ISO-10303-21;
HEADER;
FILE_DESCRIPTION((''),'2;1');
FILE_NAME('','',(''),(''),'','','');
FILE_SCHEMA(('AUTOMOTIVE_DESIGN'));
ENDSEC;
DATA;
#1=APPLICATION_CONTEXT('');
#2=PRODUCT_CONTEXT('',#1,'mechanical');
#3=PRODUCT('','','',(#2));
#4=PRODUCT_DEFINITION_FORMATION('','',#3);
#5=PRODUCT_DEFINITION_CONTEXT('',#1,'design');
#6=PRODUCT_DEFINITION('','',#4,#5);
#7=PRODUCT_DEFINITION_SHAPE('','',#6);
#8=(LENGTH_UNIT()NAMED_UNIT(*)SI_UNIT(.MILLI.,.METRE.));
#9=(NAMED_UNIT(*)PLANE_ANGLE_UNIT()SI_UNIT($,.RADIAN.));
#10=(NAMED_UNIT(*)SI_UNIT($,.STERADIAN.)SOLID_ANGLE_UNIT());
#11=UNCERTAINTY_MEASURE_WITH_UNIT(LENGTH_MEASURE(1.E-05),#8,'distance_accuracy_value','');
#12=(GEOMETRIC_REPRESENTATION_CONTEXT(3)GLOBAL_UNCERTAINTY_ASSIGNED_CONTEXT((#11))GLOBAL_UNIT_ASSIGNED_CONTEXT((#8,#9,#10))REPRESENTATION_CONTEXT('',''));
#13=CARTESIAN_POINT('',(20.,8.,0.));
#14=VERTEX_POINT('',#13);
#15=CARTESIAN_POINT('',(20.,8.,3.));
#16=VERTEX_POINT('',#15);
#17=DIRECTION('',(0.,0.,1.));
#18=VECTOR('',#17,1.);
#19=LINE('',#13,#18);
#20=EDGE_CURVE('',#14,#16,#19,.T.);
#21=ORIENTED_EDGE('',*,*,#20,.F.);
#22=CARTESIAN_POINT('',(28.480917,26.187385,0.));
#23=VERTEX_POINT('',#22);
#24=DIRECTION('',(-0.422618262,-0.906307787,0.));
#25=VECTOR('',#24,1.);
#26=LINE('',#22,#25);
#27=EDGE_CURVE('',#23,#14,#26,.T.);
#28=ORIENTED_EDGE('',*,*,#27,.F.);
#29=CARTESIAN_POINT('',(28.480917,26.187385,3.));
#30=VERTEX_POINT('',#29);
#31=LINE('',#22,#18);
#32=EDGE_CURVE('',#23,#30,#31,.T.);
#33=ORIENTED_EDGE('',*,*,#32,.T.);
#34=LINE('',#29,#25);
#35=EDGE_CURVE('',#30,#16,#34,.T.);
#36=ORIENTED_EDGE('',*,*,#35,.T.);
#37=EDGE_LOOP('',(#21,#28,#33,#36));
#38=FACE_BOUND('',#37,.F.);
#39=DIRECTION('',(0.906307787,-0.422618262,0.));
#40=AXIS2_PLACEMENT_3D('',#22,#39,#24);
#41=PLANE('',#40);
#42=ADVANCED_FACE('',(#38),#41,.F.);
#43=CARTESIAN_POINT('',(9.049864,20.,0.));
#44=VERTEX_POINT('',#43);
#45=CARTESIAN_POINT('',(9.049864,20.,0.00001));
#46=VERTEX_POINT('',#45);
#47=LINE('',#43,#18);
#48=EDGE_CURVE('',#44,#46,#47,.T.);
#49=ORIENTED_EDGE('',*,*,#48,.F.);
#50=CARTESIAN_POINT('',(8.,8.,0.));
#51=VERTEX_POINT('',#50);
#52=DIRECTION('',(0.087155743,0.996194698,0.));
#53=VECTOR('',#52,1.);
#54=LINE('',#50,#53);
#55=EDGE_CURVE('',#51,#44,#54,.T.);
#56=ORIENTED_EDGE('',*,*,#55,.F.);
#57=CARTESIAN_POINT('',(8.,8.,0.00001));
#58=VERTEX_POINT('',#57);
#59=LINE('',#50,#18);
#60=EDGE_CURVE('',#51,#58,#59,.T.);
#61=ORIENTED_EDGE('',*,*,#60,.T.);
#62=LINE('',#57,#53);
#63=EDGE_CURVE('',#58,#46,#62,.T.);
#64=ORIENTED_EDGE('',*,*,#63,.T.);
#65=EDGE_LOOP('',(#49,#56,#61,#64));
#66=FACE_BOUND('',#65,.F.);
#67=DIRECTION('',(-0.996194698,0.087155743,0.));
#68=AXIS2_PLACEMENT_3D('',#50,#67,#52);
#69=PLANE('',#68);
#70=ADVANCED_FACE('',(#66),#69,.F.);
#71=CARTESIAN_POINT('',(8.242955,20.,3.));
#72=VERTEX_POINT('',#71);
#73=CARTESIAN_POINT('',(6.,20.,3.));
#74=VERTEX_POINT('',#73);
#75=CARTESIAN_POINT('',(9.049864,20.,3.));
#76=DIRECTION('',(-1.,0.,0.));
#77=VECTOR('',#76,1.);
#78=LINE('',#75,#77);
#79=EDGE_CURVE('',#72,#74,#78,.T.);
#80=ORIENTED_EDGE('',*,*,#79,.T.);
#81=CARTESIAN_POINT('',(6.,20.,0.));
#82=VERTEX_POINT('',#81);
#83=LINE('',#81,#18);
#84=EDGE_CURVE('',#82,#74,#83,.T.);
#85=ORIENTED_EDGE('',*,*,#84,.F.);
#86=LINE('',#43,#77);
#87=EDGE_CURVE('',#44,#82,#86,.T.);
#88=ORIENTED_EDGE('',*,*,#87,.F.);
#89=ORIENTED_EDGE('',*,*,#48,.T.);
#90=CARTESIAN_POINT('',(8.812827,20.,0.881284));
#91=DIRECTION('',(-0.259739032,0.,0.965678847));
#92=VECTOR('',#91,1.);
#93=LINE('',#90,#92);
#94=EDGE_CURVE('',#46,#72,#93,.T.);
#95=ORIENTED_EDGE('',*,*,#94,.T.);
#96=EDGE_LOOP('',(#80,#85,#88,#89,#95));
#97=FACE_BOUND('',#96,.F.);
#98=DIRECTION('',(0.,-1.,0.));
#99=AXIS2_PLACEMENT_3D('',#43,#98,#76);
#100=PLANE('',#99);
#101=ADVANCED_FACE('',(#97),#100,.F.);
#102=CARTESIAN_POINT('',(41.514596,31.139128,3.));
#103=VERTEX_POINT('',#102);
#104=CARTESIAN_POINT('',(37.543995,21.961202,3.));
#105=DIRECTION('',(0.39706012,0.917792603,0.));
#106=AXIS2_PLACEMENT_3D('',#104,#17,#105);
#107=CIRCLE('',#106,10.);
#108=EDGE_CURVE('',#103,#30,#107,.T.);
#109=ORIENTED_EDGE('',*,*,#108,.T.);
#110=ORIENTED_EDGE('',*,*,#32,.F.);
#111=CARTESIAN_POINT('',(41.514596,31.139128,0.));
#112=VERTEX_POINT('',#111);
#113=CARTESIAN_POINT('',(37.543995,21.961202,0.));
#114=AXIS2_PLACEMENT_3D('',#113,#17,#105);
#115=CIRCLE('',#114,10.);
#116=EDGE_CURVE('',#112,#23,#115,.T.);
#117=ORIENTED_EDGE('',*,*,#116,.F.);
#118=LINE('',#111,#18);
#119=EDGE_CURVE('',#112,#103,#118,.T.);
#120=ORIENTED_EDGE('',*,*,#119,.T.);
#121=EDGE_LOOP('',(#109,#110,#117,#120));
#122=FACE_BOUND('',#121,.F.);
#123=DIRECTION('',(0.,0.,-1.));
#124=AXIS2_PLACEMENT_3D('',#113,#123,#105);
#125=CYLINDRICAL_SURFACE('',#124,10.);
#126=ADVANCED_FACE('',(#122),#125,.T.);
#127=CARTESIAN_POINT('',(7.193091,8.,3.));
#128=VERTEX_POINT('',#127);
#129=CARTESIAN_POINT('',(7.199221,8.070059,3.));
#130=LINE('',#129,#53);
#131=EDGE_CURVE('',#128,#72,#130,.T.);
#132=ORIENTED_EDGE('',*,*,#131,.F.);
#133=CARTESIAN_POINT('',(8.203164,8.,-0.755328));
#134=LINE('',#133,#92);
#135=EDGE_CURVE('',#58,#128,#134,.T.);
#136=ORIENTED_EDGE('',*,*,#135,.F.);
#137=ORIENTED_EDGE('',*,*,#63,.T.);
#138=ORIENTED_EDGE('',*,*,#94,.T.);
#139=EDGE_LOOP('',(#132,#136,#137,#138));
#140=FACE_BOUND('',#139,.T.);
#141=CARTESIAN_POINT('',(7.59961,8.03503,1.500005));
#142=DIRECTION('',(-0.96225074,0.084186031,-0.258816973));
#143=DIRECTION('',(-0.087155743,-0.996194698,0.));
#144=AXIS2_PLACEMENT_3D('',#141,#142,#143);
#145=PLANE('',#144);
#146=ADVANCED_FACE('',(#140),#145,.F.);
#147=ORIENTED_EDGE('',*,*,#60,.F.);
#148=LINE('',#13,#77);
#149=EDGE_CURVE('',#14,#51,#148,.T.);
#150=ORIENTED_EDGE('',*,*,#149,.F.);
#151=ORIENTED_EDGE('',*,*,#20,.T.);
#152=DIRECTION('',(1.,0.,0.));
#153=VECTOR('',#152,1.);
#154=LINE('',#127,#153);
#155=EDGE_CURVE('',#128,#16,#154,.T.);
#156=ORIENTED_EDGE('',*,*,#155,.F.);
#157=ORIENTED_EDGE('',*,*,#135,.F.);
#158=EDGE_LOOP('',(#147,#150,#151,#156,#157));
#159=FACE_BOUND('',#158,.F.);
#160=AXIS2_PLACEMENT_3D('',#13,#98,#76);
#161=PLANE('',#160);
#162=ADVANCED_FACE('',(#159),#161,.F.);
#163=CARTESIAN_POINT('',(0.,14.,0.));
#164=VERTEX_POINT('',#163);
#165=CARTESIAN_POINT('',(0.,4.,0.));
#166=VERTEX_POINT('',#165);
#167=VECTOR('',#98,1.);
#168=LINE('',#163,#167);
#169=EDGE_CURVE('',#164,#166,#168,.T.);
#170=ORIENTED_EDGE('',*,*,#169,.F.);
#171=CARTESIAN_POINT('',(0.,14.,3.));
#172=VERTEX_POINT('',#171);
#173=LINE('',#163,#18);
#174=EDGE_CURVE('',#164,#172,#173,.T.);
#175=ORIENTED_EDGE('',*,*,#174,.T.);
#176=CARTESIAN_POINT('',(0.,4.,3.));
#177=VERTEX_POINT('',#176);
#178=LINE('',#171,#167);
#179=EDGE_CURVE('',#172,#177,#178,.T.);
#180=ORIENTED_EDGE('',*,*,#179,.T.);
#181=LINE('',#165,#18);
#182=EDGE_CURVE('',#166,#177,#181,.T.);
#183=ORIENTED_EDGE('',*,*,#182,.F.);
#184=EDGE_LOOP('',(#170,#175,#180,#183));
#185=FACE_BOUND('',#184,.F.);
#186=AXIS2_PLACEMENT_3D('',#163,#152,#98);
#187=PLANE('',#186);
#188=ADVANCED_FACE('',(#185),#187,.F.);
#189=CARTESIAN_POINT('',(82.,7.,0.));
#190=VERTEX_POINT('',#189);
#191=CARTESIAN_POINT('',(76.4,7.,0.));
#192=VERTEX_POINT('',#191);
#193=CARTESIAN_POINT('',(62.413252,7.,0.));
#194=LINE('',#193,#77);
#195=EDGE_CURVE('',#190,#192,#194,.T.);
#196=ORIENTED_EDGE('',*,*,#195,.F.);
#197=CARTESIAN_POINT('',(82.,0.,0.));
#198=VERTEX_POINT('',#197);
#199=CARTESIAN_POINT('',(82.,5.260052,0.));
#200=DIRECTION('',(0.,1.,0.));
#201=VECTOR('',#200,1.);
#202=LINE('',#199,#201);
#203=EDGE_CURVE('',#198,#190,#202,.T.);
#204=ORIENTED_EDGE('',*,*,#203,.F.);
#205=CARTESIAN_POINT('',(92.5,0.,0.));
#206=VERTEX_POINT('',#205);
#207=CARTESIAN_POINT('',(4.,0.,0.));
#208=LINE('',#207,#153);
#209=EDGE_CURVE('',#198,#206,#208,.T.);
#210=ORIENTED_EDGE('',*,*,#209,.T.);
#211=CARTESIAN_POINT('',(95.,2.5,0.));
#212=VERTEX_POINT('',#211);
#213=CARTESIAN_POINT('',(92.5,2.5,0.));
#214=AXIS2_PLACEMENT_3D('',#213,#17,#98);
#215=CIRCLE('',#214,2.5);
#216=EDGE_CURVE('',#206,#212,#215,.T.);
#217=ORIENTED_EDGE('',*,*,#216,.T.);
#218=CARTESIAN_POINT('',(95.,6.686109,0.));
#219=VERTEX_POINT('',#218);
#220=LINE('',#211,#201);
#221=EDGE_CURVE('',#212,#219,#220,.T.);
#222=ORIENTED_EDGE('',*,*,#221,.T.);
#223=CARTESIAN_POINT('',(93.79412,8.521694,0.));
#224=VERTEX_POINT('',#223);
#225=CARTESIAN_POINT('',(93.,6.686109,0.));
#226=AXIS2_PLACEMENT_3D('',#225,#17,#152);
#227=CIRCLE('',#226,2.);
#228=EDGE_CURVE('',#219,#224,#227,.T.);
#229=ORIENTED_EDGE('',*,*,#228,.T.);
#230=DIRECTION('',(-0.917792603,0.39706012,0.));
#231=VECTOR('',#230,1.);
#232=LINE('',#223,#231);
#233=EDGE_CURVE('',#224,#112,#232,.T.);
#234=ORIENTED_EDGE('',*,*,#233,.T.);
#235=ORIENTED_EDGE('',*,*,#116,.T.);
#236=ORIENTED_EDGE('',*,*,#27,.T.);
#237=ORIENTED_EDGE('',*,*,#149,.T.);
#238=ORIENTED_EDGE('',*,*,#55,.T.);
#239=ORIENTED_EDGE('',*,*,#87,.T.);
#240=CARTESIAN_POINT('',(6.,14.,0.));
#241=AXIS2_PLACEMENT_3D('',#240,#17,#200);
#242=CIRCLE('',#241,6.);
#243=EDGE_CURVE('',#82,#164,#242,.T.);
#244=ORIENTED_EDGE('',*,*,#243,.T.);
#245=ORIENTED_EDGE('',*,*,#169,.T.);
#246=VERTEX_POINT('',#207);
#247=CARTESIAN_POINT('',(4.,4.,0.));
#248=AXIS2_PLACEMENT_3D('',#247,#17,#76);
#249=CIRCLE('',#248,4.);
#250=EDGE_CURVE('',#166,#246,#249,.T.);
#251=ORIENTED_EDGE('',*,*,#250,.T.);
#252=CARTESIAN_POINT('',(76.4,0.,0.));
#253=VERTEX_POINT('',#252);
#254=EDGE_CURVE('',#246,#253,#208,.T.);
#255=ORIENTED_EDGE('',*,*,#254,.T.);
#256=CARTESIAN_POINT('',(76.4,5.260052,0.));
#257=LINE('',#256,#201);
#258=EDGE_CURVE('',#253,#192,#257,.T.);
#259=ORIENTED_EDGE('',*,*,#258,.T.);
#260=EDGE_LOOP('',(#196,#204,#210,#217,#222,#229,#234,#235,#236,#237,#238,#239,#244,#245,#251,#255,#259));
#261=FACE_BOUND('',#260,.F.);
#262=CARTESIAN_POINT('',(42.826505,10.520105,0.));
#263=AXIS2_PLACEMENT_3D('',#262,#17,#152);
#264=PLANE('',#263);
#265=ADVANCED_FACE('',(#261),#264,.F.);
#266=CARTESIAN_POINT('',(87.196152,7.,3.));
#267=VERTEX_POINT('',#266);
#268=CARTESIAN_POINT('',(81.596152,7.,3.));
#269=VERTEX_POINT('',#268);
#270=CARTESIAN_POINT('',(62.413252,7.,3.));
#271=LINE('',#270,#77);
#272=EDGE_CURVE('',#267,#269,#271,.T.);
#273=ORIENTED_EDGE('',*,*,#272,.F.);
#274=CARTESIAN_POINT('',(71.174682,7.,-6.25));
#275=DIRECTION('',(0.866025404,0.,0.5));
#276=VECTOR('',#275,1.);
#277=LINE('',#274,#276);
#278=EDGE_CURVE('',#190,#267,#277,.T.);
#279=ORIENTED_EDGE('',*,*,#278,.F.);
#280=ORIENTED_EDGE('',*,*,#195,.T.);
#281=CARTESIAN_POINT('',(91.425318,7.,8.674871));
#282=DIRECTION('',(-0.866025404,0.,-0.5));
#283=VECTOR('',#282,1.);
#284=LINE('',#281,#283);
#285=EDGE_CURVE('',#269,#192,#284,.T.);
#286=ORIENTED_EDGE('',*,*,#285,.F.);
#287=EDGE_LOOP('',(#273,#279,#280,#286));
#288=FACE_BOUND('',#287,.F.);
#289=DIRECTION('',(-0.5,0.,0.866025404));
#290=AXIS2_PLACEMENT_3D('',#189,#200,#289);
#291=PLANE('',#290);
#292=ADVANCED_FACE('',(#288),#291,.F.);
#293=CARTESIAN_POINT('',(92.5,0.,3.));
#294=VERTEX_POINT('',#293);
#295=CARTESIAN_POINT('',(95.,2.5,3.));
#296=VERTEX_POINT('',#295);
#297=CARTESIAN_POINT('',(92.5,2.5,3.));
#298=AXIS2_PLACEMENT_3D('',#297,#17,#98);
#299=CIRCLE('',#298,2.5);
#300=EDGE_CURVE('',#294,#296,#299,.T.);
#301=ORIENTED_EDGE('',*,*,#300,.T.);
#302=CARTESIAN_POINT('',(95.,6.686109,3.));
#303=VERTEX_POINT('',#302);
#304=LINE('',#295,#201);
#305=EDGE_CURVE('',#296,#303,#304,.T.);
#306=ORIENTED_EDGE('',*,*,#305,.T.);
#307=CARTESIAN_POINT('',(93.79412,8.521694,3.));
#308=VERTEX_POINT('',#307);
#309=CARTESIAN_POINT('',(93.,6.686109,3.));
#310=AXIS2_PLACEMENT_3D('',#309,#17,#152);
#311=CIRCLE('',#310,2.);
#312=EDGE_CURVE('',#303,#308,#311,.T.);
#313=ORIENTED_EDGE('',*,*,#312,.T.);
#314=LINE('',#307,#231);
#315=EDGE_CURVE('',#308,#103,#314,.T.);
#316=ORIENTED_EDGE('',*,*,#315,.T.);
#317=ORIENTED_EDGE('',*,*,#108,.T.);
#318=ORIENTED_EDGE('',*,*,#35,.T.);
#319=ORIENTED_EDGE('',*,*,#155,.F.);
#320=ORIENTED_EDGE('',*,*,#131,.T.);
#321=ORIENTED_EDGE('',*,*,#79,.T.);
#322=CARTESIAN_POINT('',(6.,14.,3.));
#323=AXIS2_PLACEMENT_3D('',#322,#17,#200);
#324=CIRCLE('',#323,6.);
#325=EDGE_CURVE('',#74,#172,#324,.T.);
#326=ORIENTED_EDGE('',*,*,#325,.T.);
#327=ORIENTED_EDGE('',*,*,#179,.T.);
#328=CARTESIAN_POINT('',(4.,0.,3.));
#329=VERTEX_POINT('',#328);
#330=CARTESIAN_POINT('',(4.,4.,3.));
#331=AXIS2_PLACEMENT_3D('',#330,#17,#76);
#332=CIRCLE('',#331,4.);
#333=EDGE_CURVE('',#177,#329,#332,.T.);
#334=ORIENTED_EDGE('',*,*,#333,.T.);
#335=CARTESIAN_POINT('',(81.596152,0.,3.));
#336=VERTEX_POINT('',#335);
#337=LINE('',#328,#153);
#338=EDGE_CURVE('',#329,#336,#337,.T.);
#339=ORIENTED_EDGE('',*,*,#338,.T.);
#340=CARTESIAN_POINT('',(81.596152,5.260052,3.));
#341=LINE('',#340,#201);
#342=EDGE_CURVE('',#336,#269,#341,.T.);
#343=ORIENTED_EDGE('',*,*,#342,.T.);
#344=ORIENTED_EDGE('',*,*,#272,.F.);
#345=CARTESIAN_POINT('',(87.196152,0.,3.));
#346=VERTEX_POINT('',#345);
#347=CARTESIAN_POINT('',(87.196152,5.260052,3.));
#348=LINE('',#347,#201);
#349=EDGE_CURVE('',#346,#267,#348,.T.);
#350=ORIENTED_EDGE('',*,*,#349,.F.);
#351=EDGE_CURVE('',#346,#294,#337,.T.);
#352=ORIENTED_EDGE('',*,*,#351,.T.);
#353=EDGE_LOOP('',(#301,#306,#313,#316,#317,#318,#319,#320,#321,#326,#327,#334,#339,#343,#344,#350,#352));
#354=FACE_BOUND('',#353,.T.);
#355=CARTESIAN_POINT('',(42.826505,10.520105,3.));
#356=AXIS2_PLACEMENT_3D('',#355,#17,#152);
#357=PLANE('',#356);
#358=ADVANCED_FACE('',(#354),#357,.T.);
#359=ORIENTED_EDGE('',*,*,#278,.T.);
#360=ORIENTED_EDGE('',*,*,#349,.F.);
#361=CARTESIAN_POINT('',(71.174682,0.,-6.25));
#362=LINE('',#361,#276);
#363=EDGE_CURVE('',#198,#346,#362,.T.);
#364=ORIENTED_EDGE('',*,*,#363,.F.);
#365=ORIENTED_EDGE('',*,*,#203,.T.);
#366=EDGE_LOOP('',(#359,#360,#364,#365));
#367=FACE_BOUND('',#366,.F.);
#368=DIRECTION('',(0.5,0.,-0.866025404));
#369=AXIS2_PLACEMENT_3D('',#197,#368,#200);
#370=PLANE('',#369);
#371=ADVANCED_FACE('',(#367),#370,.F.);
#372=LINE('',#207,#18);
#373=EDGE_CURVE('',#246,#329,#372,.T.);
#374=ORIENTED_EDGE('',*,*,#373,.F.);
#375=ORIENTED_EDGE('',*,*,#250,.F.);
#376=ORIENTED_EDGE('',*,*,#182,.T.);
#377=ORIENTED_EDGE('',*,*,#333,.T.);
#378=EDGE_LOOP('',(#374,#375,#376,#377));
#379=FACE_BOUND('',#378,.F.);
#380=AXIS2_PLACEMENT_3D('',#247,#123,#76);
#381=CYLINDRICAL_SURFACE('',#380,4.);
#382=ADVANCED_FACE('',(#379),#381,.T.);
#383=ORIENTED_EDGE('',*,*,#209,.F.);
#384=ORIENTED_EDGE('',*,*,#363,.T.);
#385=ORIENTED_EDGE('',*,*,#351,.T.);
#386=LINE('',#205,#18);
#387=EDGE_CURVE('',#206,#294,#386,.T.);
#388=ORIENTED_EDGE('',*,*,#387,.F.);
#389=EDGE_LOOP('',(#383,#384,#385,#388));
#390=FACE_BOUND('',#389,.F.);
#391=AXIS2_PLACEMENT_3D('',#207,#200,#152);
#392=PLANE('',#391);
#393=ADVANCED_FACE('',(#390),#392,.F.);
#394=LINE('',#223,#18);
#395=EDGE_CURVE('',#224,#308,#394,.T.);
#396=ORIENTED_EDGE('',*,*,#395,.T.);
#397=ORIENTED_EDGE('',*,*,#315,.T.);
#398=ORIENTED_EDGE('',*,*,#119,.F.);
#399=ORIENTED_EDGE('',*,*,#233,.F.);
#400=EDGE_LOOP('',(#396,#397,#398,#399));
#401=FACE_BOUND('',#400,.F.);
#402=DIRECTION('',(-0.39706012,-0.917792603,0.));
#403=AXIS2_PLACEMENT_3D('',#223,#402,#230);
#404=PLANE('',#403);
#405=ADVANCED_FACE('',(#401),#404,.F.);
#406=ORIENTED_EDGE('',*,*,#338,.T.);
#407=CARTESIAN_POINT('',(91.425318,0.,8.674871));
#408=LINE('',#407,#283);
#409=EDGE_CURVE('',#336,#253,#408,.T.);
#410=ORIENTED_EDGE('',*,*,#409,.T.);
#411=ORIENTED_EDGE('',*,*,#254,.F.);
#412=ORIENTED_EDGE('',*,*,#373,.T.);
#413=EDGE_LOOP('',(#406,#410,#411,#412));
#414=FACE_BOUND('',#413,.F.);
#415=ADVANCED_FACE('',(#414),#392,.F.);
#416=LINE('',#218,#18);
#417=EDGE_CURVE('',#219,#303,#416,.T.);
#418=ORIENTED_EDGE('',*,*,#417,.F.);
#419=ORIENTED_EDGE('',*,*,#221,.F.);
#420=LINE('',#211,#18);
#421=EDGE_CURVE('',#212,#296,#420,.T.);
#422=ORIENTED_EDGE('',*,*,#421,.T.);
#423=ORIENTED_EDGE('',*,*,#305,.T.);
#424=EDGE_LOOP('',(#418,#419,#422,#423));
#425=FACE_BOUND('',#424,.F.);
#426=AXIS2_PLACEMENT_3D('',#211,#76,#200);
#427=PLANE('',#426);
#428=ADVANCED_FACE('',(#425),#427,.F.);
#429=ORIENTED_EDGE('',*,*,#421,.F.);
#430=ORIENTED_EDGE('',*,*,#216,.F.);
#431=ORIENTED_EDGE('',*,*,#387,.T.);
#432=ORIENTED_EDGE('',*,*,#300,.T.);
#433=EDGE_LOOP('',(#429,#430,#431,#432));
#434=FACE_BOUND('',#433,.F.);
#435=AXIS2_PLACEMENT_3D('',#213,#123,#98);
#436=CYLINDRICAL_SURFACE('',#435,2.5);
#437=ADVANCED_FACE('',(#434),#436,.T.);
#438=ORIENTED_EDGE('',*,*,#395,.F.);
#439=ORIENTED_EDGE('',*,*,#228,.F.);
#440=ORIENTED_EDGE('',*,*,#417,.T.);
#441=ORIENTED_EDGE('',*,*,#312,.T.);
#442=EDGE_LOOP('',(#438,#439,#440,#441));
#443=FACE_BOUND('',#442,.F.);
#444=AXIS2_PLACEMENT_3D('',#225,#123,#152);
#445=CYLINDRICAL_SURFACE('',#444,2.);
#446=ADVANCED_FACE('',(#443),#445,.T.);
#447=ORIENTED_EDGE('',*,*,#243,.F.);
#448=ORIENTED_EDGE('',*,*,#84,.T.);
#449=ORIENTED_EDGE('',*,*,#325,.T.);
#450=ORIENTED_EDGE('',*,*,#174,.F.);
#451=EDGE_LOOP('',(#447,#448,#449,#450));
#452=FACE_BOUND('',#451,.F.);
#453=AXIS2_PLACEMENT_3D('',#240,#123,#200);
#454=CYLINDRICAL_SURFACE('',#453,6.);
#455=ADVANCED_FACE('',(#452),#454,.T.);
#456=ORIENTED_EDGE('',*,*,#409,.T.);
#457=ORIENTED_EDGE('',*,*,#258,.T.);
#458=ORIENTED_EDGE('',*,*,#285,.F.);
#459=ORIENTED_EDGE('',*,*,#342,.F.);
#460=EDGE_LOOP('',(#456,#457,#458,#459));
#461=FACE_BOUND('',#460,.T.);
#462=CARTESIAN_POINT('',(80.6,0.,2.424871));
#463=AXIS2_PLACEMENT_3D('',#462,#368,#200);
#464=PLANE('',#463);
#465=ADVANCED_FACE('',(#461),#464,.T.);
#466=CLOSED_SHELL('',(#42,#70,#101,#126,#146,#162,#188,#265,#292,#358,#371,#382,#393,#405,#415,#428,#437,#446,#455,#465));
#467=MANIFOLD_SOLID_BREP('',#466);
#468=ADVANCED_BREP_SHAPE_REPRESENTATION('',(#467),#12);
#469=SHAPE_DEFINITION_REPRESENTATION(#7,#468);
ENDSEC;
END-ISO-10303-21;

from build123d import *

# Parameters (mm, degrees)
F1_DEPTH = 3
F5_SIZE2 = 0.803838
F5_SIZE  = 2.99999
F4_W     = 7
F4_H     = 2.8
F6_DEPTH = 12.5


# Not quite as in the source:
# - a fillet or chamfer is up to 0.001 mm smaller than in the source, because OpenCascade refuses the exact size


with BuildPart() as f1:
    # F0 (on Top) → F1 (new body)
    with BuildSketch(Plane.XY):
        with BuildLine():
            Line((4, 0), (92.5, 0))
            ThreePointArc((92.5, 0), (94.267766953, 0.732233047), (95, 2.5))
            Line((95, 2.5), (95, 6.6861086512))
            ThreePointArc((95, 6.6861086512), (94.6715622153, 7.784234218), (93.7941202395, 8.5216938563))
            Line((93.7941202395, 8.5216938563), (41.5145959947, 31.1391284496))
            ThreePointArc((41.5145959947, 31.1391284496), (33.9924781689, 31.3092893749), (28.4809169267, 26.1873850415))
            Line((28.4809169267, 26.1873850415), (20, 8))
            Line((20, 8), (8, 8))
            Line((8, 8), (9.0498639623, 20))
            Line((9.0498639623, 20), (6, 20))
            ThreePointArc((6, 20), (1.7573593129, 18.2426406871), (0, 14))
            Line((0, 14), (0, 4))
            ThreePointArc((0, 4), (1.1715728753, 1.1715728753), (4, 0))
        make_face()
    extrude(amount=F1_DEPTH)

    # F5 (size 3 and 0.8038475773 in the source; OpenCascade refuses exactly that, so slightly less here)
    f5_edges = [f1.edges().sort_by_distance(p)[0] for p in [
        (8.524932, 14, 3),
    ]]
    f5_side = f1.faces().sort_by_distance((8.524932, 14, 1.5))[0]
    chamfer(f5_edges, length=F5_SIZE, length2=F5_SIZE2, reference=f5_side)

    # F4 (on line) → F6 (cut, symmetric)
    with BuildSketch(Plane(origin=(61.5, 0, 35.5070415552), x_dir=(0, 1, 0), z_dir=(0.8660254038, 0, 0.5))):
        with Locations((3.5, -39.6)):
            Rectangle(F4_W, F4_H)
    extrude(amount=F6_DEPTH, both=True, mode=Mode.SUBTRACT)


solid = f1.part
